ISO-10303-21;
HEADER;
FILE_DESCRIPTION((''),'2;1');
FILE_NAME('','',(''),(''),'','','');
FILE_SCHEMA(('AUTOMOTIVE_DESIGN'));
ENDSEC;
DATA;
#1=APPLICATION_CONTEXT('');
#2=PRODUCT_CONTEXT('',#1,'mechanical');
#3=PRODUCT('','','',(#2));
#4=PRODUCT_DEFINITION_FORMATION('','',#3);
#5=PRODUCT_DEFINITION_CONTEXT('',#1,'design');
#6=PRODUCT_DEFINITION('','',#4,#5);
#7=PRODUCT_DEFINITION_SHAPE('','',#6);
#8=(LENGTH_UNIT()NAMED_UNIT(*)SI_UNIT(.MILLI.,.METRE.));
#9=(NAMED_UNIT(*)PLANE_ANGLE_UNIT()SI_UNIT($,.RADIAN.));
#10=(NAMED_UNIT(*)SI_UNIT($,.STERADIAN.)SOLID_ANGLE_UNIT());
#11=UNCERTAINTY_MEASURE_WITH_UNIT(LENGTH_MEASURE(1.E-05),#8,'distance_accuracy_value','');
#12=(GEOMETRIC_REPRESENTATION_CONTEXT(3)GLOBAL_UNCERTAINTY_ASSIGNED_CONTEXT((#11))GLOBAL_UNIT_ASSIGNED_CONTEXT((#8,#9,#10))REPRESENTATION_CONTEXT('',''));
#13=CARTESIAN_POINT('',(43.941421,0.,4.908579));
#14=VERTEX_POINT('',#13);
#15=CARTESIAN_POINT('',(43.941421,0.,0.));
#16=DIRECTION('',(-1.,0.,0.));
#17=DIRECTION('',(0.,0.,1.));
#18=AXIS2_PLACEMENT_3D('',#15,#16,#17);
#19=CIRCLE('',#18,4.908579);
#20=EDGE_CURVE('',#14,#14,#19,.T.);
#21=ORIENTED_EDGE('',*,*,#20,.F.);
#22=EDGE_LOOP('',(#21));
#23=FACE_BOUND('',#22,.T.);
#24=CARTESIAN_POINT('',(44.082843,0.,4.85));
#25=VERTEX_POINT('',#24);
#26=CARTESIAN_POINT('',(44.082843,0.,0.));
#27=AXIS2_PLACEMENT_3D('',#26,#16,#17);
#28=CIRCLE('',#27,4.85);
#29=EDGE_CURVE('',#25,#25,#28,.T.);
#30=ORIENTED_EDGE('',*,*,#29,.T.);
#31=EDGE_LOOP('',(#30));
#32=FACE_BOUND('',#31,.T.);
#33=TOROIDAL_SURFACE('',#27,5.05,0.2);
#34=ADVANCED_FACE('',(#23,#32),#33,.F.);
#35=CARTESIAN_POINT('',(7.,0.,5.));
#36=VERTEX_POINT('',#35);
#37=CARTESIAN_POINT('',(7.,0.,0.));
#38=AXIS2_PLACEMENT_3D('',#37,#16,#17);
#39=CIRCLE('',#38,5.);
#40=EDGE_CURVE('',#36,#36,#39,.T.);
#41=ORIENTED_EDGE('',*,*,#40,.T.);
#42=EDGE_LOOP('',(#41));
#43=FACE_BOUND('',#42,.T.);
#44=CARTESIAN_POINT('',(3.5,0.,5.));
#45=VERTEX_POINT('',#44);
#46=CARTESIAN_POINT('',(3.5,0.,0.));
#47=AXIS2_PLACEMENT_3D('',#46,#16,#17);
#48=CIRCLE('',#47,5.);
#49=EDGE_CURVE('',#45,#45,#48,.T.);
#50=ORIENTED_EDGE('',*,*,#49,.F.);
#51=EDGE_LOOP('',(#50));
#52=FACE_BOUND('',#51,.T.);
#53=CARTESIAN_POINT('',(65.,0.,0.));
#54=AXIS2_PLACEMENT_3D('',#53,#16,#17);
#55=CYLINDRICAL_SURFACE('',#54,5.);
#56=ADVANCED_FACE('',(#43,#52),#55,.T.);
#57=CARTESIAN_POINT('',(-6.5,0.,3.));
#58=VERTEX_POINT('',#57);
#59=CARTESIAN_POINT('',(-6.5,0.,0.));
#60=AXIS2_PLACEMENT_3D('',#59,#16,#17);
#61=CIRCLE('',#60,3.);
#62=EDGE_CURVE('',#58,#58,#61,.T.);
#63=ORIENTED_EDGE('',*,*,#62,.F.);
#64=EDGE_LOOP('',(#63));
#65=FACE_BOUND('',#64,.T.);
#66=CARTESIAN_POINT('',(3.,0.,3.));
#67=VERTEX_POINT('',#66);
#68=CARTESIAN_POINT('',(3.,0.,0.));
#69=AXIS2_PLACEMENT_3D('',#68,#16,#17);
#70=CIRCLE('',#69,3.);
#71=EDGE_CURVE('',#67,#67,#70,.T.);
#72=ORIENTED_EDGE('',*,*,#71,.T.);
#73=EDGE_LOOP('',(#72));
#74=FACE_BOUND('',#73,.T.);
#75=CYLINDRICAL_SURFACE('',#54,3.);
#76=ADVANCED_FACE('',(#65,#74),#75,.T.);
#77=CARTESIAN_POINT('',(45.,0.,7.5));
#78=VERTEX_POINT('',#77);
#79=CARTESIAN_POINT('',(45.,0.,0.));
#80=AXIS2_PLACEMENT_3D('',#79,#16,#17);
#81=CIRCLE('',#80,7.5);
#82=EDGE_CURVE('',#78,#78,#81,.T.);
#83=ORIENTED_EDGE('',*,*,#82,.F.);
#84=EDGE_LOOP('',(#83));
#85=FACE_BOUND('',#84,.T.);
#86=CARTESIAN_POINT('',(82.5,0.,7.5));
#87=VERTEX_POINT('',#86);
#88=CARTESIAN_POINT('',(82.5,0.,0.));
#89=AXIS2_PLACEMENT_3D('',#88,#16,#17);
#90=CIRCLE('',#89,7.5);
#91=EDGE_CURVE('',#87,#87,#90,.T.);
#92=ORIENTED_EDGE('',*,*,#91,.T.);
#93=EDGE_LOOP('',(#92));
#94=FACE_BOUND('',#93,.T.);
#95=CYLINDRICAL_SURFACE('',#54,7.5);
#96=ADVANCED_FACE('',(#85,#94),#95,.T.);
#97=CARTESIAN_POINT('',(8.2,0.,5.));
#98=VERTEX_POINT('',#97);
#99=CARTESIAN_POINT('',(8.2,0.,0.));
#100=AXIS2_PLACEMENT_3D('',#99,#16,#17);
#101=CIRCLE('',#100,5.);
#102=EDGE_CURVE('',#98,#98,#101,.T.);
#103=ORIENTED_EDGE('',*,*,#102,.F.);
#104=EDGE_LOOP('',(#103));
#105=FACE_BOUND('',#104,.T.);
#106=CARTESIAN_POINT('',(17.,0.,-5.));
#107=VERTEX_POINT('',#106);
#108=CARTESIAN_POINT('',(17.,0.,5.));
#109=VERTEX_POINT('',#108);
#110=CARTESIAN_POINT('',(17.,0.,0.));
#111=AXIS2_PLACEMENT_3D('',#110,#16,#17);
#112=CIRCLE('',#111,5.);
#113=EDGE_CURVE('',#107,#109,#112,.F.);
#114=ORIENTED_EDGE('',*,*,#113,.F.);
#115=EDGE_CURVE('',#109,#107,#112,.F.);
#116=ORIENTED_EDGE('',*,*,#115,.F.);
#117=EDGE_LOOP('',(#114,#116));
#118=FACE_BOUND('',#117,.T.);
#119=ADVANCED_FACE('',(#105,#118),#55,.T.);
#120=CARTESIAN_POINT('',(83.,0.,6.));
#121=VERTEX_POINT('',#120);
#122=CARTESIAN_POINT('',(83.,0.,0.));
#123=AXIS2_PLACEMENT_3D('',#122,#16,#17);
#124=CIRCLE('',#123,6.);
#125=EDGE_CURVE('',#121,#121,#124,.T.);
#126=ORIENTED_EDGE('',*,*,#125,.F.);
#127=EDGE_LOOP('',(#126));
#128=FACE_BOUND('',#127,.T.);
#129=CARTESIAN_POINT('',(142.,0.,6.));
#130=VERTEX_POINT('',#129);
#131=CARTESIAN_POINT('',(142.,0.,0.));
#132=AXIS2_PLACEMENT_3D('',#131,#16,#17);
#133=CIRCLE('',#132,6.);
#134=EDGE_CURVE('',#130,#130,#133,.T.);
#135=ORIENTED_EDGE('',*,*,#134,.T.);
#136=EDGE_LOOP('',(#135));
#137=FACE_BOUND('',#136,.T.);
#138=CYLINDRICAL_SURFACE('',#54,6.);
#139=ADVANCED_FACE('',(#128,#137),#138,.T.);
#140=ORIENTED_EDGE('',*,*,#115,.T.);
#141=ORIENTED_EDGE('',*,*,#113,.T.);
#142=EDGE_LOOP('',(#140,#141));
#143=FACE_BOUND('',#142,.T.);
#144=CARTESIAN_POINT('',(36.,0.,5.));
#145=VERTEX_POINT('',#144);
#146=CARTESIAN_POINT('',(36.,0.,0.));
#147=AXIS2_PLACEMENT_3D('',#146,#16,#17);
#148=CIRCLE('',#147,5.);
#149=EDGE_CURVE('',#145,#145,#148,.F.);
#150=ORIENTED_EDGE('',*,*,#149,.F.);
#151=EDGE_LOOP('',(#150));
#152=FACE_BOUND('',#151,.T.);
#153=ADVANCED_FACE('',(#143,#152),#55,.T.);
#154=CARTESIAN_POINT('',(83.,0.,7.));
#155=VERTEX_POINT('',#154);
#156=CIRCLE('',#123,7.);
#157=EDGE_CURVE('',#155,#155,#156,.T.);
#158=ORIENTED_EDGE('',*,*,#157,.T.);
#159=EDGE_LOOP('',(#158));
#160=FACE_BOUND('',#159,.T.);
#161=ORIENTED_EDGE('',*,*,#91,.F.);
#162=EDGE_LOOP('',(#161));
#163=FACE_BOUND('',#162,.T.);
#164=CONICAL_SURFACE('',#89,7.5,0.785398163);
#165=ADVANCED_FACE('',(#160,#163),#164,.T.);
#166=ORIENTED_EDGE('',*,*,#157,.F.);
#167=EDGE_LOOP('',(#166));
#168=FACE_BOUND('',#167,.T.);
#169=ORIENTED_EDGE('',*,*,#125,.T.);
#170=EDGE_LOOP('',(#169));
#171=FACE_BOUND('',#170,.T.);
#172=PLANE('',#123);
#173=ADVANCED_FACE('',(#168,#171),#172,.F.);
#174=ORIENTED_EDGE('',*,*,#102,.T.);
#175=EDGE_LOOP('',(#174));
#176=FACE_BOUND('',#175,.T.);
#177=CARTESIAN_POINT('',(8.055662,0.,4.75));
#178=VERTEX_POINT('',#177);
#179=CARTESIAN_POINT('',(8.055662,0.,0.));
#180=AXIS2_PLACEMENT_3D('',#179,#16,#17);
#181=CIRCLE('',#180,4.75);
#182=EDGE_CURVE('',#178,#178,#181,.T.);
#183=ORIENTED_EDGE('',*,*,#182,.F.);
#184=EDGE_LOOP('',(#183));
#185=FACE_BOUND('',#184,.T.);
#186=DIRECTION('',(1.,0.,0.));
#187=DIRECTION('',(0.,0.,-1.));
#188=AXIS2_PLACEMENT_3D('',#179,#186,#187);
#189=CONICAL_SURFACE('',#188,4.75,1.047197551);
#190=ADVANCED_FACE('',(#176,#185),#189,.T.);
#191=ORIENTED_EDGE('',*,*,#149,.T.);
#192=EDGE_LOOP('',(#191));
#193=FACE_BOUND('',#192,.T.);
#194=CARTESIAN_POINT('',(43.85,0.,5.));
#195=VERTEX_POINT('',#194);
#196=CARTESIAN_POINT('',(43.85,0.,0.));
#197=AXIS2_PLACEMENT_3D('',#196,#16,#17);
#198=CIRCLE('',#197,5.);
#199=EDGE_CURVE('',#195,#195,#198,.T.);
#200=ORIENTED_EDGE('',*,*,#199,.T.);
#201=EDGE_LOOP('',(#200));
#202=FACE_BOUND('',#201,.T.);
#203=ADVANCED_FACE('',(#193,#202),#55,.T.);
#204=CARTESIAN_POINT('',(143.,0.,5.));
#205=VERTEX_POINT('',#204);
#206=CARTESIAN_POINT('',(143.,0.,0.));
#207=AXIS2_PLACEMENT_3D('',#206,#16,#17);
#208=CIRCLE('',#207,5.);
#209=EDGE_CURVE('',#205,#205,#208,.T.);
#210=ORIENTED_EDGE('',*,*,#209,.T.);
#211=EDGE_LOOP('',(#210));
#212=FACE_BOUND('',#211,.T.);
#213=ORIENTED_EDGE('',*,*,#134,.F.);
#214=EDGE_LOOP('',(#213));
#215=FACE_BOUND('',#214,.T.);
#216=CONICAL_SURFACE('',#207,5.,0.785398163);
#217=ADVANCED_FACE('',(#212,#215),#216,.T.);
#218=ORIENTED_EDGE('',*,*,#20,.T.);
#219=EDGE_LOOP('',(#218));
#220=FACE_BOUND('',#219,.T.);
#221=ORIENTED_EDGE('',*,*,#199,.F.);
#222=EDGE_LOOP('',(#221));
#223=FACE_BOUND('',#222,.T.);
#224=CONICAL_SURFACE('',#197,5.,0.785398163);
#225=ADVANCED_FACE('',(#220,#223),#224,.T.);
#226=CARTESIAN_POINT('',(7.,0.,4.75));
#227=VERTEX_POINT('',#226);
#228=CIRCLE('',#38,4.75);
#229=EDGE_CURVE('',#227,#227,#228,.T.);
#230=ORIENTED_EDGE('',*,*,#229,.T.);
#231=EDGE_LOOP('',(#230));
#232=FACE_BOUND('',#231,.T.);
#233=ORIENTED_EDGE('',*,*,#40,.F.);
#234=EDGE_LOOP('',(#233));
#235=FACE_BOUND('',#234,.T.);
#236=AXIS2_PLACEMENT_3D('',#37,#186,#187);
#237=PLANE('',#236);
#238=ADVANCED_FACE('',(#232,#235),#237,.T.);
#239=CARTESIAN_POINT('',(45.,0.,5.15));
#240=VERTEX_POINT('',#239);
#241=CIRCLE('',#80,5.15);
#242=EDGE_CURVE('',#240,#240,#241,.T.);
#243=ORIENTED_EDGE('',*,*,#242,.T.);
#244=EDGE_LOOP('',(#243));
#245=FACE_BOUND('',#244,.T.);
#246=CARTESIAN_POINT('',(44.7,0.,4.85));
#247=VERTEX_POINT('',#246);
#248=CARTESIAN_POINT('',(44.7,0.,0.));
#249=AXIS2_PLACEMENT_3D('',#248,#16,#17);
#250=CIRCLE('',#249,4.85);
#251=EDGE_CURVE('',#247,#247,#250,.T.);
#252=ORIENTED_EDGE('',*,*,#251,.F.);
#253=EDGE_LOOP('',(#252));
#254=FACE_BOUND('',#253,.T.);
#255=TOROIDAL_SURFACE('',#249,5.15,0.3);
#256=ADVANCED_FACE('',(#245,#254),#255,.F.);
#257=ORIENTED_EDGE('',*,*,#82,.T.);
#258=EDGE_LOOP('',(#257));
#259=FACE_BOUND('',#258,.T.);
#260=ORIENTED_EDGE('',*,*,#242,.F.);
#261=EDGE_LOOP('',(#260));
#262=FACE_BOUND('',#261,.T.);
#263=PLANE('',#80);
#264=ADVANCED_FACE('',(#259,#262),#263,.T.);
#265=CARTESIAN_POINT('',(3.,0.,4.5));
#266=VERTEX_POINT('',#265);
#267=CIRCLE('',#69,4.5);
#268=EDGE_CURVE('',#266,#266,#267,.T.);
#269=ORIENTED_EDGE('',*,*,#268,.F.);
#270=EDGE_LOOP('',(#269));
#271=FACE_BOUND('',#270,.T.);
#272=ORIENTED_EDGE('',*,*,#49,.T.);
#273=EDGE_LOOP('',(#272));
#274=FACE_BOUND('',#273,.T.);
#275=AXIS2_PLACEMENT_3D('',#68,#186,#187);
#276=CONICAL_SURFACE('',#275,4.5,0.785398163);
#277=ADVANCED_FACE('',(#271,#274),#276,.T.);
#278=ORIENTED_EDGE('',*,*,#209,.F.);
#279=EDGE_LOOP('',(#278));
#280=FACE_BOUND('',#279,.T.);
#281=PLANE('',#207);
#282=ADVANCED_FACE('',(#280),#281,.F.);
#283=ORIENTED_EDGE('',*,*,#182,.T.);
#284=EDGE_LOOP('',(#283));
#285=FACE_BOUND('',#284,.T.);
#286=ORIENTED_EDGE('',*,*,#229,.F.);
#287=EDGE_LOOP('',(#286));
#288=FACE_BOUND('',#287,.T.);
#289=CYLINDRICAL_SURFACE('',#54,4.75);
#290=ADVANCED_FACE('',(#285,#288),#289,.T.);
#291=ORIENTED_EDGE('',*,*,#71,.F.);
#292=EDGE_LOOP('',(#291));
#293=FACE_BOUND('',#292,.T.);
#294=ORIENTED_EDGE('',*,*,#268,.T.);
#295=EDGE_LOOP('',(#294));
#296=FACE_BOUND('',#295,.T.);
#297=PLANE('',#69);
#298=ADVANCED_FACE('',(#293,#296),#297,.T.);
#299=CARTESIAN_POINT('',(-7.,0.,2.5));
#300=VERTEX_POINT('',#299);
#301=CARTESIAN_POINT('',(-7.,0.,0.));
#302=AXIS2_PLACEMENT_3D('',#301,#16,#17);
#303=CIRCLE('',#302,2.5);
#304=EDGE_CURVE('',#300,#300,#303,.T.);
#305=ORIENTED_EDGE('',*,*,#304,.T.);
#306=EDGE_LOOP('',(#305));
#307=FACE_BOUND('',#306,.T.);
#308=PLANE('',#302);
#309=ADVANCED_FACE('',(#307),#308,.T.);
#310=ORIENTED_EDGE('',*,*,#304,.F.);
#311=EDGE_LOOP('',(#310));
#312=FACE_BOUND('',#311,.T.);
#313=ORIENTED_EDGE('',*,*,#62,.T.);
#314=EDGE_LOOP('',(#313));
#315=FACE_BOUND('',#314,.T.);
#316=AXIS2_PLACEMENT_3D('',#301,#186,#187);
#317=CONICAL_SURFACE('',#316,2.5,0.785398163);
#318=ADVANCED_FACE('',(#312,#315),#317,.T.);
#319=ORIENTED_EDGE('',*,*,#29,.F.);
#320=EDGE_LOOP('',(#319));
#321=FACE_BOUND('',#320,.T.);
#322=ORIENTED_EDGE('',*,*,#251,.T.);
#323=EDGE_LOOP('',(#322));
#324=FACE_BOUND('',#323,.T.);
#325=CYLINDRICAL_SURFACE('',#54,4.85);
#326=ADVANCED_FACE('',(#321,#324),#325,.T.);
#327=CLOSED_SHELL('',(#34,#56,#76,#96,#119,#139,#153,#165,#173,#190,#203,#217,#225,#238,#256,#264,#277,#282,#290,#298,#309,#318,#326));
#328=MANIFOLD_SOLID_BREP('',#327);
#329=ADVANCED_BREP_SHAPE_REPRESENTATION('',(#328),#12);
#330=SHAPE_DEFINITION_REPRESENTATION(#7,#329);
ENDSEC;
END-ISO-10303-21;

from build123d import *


with BuildPart() as part:
    # Skizze1 → Rotation1 (revolve)
    with BuildSketch(Plane(origin=(0, 0, 0), x_dir=(1, 0, 0), z_dir=(0, 1, 0))):
        with BuildLine():
            Line((-7, 2.5), (-7, 0))
            Line((-7, 0), (143, 0))
            Line((143, 0), (143, 5))
            Line((143, 5), (142, 6))
            Line((142, 6), (83, 6))
            Line((83, 6), (83, 7))
            Line((83, 7), (82.5, 7.5))
            Line((82.5, 7.5), (45, 7.5))
            Line((45, 7.5), (45, 5.15))
            ThreePointArc((45, 5.15), (44.912132034, 4.937867966), (44.7, 4.85))
            Line((44.7, 4.85), (44.082842712, 4.85))
            ThreePointArc((44.082842712, 4.85), (44.006306026, 4.865224093), (43.941421356, 4.908578644))
            Line((43.941421356, 4.908578644), (43.85, 5))
            Line((43.85, 5), (8.2, 5))
            Line((8.2, 5), (8.055662433, 4.75))
            Line((8.055662433, 4.75), (7, 4.75))
            Line((7, 4.75), (7, 5))
            Line((7, 5), (3.5, 5))
            Line((3.5, 5), (3, 4.5))
            Line((3, 4.5), (3, 3))
            Line((3, 3), (-6.5, 3))
            Line((-6.5, 3), (-7, 2.5))
        make_face()
    revolve(axis=Axis((65, 0, 0), (1, 0, 0)))


solid = part.part
